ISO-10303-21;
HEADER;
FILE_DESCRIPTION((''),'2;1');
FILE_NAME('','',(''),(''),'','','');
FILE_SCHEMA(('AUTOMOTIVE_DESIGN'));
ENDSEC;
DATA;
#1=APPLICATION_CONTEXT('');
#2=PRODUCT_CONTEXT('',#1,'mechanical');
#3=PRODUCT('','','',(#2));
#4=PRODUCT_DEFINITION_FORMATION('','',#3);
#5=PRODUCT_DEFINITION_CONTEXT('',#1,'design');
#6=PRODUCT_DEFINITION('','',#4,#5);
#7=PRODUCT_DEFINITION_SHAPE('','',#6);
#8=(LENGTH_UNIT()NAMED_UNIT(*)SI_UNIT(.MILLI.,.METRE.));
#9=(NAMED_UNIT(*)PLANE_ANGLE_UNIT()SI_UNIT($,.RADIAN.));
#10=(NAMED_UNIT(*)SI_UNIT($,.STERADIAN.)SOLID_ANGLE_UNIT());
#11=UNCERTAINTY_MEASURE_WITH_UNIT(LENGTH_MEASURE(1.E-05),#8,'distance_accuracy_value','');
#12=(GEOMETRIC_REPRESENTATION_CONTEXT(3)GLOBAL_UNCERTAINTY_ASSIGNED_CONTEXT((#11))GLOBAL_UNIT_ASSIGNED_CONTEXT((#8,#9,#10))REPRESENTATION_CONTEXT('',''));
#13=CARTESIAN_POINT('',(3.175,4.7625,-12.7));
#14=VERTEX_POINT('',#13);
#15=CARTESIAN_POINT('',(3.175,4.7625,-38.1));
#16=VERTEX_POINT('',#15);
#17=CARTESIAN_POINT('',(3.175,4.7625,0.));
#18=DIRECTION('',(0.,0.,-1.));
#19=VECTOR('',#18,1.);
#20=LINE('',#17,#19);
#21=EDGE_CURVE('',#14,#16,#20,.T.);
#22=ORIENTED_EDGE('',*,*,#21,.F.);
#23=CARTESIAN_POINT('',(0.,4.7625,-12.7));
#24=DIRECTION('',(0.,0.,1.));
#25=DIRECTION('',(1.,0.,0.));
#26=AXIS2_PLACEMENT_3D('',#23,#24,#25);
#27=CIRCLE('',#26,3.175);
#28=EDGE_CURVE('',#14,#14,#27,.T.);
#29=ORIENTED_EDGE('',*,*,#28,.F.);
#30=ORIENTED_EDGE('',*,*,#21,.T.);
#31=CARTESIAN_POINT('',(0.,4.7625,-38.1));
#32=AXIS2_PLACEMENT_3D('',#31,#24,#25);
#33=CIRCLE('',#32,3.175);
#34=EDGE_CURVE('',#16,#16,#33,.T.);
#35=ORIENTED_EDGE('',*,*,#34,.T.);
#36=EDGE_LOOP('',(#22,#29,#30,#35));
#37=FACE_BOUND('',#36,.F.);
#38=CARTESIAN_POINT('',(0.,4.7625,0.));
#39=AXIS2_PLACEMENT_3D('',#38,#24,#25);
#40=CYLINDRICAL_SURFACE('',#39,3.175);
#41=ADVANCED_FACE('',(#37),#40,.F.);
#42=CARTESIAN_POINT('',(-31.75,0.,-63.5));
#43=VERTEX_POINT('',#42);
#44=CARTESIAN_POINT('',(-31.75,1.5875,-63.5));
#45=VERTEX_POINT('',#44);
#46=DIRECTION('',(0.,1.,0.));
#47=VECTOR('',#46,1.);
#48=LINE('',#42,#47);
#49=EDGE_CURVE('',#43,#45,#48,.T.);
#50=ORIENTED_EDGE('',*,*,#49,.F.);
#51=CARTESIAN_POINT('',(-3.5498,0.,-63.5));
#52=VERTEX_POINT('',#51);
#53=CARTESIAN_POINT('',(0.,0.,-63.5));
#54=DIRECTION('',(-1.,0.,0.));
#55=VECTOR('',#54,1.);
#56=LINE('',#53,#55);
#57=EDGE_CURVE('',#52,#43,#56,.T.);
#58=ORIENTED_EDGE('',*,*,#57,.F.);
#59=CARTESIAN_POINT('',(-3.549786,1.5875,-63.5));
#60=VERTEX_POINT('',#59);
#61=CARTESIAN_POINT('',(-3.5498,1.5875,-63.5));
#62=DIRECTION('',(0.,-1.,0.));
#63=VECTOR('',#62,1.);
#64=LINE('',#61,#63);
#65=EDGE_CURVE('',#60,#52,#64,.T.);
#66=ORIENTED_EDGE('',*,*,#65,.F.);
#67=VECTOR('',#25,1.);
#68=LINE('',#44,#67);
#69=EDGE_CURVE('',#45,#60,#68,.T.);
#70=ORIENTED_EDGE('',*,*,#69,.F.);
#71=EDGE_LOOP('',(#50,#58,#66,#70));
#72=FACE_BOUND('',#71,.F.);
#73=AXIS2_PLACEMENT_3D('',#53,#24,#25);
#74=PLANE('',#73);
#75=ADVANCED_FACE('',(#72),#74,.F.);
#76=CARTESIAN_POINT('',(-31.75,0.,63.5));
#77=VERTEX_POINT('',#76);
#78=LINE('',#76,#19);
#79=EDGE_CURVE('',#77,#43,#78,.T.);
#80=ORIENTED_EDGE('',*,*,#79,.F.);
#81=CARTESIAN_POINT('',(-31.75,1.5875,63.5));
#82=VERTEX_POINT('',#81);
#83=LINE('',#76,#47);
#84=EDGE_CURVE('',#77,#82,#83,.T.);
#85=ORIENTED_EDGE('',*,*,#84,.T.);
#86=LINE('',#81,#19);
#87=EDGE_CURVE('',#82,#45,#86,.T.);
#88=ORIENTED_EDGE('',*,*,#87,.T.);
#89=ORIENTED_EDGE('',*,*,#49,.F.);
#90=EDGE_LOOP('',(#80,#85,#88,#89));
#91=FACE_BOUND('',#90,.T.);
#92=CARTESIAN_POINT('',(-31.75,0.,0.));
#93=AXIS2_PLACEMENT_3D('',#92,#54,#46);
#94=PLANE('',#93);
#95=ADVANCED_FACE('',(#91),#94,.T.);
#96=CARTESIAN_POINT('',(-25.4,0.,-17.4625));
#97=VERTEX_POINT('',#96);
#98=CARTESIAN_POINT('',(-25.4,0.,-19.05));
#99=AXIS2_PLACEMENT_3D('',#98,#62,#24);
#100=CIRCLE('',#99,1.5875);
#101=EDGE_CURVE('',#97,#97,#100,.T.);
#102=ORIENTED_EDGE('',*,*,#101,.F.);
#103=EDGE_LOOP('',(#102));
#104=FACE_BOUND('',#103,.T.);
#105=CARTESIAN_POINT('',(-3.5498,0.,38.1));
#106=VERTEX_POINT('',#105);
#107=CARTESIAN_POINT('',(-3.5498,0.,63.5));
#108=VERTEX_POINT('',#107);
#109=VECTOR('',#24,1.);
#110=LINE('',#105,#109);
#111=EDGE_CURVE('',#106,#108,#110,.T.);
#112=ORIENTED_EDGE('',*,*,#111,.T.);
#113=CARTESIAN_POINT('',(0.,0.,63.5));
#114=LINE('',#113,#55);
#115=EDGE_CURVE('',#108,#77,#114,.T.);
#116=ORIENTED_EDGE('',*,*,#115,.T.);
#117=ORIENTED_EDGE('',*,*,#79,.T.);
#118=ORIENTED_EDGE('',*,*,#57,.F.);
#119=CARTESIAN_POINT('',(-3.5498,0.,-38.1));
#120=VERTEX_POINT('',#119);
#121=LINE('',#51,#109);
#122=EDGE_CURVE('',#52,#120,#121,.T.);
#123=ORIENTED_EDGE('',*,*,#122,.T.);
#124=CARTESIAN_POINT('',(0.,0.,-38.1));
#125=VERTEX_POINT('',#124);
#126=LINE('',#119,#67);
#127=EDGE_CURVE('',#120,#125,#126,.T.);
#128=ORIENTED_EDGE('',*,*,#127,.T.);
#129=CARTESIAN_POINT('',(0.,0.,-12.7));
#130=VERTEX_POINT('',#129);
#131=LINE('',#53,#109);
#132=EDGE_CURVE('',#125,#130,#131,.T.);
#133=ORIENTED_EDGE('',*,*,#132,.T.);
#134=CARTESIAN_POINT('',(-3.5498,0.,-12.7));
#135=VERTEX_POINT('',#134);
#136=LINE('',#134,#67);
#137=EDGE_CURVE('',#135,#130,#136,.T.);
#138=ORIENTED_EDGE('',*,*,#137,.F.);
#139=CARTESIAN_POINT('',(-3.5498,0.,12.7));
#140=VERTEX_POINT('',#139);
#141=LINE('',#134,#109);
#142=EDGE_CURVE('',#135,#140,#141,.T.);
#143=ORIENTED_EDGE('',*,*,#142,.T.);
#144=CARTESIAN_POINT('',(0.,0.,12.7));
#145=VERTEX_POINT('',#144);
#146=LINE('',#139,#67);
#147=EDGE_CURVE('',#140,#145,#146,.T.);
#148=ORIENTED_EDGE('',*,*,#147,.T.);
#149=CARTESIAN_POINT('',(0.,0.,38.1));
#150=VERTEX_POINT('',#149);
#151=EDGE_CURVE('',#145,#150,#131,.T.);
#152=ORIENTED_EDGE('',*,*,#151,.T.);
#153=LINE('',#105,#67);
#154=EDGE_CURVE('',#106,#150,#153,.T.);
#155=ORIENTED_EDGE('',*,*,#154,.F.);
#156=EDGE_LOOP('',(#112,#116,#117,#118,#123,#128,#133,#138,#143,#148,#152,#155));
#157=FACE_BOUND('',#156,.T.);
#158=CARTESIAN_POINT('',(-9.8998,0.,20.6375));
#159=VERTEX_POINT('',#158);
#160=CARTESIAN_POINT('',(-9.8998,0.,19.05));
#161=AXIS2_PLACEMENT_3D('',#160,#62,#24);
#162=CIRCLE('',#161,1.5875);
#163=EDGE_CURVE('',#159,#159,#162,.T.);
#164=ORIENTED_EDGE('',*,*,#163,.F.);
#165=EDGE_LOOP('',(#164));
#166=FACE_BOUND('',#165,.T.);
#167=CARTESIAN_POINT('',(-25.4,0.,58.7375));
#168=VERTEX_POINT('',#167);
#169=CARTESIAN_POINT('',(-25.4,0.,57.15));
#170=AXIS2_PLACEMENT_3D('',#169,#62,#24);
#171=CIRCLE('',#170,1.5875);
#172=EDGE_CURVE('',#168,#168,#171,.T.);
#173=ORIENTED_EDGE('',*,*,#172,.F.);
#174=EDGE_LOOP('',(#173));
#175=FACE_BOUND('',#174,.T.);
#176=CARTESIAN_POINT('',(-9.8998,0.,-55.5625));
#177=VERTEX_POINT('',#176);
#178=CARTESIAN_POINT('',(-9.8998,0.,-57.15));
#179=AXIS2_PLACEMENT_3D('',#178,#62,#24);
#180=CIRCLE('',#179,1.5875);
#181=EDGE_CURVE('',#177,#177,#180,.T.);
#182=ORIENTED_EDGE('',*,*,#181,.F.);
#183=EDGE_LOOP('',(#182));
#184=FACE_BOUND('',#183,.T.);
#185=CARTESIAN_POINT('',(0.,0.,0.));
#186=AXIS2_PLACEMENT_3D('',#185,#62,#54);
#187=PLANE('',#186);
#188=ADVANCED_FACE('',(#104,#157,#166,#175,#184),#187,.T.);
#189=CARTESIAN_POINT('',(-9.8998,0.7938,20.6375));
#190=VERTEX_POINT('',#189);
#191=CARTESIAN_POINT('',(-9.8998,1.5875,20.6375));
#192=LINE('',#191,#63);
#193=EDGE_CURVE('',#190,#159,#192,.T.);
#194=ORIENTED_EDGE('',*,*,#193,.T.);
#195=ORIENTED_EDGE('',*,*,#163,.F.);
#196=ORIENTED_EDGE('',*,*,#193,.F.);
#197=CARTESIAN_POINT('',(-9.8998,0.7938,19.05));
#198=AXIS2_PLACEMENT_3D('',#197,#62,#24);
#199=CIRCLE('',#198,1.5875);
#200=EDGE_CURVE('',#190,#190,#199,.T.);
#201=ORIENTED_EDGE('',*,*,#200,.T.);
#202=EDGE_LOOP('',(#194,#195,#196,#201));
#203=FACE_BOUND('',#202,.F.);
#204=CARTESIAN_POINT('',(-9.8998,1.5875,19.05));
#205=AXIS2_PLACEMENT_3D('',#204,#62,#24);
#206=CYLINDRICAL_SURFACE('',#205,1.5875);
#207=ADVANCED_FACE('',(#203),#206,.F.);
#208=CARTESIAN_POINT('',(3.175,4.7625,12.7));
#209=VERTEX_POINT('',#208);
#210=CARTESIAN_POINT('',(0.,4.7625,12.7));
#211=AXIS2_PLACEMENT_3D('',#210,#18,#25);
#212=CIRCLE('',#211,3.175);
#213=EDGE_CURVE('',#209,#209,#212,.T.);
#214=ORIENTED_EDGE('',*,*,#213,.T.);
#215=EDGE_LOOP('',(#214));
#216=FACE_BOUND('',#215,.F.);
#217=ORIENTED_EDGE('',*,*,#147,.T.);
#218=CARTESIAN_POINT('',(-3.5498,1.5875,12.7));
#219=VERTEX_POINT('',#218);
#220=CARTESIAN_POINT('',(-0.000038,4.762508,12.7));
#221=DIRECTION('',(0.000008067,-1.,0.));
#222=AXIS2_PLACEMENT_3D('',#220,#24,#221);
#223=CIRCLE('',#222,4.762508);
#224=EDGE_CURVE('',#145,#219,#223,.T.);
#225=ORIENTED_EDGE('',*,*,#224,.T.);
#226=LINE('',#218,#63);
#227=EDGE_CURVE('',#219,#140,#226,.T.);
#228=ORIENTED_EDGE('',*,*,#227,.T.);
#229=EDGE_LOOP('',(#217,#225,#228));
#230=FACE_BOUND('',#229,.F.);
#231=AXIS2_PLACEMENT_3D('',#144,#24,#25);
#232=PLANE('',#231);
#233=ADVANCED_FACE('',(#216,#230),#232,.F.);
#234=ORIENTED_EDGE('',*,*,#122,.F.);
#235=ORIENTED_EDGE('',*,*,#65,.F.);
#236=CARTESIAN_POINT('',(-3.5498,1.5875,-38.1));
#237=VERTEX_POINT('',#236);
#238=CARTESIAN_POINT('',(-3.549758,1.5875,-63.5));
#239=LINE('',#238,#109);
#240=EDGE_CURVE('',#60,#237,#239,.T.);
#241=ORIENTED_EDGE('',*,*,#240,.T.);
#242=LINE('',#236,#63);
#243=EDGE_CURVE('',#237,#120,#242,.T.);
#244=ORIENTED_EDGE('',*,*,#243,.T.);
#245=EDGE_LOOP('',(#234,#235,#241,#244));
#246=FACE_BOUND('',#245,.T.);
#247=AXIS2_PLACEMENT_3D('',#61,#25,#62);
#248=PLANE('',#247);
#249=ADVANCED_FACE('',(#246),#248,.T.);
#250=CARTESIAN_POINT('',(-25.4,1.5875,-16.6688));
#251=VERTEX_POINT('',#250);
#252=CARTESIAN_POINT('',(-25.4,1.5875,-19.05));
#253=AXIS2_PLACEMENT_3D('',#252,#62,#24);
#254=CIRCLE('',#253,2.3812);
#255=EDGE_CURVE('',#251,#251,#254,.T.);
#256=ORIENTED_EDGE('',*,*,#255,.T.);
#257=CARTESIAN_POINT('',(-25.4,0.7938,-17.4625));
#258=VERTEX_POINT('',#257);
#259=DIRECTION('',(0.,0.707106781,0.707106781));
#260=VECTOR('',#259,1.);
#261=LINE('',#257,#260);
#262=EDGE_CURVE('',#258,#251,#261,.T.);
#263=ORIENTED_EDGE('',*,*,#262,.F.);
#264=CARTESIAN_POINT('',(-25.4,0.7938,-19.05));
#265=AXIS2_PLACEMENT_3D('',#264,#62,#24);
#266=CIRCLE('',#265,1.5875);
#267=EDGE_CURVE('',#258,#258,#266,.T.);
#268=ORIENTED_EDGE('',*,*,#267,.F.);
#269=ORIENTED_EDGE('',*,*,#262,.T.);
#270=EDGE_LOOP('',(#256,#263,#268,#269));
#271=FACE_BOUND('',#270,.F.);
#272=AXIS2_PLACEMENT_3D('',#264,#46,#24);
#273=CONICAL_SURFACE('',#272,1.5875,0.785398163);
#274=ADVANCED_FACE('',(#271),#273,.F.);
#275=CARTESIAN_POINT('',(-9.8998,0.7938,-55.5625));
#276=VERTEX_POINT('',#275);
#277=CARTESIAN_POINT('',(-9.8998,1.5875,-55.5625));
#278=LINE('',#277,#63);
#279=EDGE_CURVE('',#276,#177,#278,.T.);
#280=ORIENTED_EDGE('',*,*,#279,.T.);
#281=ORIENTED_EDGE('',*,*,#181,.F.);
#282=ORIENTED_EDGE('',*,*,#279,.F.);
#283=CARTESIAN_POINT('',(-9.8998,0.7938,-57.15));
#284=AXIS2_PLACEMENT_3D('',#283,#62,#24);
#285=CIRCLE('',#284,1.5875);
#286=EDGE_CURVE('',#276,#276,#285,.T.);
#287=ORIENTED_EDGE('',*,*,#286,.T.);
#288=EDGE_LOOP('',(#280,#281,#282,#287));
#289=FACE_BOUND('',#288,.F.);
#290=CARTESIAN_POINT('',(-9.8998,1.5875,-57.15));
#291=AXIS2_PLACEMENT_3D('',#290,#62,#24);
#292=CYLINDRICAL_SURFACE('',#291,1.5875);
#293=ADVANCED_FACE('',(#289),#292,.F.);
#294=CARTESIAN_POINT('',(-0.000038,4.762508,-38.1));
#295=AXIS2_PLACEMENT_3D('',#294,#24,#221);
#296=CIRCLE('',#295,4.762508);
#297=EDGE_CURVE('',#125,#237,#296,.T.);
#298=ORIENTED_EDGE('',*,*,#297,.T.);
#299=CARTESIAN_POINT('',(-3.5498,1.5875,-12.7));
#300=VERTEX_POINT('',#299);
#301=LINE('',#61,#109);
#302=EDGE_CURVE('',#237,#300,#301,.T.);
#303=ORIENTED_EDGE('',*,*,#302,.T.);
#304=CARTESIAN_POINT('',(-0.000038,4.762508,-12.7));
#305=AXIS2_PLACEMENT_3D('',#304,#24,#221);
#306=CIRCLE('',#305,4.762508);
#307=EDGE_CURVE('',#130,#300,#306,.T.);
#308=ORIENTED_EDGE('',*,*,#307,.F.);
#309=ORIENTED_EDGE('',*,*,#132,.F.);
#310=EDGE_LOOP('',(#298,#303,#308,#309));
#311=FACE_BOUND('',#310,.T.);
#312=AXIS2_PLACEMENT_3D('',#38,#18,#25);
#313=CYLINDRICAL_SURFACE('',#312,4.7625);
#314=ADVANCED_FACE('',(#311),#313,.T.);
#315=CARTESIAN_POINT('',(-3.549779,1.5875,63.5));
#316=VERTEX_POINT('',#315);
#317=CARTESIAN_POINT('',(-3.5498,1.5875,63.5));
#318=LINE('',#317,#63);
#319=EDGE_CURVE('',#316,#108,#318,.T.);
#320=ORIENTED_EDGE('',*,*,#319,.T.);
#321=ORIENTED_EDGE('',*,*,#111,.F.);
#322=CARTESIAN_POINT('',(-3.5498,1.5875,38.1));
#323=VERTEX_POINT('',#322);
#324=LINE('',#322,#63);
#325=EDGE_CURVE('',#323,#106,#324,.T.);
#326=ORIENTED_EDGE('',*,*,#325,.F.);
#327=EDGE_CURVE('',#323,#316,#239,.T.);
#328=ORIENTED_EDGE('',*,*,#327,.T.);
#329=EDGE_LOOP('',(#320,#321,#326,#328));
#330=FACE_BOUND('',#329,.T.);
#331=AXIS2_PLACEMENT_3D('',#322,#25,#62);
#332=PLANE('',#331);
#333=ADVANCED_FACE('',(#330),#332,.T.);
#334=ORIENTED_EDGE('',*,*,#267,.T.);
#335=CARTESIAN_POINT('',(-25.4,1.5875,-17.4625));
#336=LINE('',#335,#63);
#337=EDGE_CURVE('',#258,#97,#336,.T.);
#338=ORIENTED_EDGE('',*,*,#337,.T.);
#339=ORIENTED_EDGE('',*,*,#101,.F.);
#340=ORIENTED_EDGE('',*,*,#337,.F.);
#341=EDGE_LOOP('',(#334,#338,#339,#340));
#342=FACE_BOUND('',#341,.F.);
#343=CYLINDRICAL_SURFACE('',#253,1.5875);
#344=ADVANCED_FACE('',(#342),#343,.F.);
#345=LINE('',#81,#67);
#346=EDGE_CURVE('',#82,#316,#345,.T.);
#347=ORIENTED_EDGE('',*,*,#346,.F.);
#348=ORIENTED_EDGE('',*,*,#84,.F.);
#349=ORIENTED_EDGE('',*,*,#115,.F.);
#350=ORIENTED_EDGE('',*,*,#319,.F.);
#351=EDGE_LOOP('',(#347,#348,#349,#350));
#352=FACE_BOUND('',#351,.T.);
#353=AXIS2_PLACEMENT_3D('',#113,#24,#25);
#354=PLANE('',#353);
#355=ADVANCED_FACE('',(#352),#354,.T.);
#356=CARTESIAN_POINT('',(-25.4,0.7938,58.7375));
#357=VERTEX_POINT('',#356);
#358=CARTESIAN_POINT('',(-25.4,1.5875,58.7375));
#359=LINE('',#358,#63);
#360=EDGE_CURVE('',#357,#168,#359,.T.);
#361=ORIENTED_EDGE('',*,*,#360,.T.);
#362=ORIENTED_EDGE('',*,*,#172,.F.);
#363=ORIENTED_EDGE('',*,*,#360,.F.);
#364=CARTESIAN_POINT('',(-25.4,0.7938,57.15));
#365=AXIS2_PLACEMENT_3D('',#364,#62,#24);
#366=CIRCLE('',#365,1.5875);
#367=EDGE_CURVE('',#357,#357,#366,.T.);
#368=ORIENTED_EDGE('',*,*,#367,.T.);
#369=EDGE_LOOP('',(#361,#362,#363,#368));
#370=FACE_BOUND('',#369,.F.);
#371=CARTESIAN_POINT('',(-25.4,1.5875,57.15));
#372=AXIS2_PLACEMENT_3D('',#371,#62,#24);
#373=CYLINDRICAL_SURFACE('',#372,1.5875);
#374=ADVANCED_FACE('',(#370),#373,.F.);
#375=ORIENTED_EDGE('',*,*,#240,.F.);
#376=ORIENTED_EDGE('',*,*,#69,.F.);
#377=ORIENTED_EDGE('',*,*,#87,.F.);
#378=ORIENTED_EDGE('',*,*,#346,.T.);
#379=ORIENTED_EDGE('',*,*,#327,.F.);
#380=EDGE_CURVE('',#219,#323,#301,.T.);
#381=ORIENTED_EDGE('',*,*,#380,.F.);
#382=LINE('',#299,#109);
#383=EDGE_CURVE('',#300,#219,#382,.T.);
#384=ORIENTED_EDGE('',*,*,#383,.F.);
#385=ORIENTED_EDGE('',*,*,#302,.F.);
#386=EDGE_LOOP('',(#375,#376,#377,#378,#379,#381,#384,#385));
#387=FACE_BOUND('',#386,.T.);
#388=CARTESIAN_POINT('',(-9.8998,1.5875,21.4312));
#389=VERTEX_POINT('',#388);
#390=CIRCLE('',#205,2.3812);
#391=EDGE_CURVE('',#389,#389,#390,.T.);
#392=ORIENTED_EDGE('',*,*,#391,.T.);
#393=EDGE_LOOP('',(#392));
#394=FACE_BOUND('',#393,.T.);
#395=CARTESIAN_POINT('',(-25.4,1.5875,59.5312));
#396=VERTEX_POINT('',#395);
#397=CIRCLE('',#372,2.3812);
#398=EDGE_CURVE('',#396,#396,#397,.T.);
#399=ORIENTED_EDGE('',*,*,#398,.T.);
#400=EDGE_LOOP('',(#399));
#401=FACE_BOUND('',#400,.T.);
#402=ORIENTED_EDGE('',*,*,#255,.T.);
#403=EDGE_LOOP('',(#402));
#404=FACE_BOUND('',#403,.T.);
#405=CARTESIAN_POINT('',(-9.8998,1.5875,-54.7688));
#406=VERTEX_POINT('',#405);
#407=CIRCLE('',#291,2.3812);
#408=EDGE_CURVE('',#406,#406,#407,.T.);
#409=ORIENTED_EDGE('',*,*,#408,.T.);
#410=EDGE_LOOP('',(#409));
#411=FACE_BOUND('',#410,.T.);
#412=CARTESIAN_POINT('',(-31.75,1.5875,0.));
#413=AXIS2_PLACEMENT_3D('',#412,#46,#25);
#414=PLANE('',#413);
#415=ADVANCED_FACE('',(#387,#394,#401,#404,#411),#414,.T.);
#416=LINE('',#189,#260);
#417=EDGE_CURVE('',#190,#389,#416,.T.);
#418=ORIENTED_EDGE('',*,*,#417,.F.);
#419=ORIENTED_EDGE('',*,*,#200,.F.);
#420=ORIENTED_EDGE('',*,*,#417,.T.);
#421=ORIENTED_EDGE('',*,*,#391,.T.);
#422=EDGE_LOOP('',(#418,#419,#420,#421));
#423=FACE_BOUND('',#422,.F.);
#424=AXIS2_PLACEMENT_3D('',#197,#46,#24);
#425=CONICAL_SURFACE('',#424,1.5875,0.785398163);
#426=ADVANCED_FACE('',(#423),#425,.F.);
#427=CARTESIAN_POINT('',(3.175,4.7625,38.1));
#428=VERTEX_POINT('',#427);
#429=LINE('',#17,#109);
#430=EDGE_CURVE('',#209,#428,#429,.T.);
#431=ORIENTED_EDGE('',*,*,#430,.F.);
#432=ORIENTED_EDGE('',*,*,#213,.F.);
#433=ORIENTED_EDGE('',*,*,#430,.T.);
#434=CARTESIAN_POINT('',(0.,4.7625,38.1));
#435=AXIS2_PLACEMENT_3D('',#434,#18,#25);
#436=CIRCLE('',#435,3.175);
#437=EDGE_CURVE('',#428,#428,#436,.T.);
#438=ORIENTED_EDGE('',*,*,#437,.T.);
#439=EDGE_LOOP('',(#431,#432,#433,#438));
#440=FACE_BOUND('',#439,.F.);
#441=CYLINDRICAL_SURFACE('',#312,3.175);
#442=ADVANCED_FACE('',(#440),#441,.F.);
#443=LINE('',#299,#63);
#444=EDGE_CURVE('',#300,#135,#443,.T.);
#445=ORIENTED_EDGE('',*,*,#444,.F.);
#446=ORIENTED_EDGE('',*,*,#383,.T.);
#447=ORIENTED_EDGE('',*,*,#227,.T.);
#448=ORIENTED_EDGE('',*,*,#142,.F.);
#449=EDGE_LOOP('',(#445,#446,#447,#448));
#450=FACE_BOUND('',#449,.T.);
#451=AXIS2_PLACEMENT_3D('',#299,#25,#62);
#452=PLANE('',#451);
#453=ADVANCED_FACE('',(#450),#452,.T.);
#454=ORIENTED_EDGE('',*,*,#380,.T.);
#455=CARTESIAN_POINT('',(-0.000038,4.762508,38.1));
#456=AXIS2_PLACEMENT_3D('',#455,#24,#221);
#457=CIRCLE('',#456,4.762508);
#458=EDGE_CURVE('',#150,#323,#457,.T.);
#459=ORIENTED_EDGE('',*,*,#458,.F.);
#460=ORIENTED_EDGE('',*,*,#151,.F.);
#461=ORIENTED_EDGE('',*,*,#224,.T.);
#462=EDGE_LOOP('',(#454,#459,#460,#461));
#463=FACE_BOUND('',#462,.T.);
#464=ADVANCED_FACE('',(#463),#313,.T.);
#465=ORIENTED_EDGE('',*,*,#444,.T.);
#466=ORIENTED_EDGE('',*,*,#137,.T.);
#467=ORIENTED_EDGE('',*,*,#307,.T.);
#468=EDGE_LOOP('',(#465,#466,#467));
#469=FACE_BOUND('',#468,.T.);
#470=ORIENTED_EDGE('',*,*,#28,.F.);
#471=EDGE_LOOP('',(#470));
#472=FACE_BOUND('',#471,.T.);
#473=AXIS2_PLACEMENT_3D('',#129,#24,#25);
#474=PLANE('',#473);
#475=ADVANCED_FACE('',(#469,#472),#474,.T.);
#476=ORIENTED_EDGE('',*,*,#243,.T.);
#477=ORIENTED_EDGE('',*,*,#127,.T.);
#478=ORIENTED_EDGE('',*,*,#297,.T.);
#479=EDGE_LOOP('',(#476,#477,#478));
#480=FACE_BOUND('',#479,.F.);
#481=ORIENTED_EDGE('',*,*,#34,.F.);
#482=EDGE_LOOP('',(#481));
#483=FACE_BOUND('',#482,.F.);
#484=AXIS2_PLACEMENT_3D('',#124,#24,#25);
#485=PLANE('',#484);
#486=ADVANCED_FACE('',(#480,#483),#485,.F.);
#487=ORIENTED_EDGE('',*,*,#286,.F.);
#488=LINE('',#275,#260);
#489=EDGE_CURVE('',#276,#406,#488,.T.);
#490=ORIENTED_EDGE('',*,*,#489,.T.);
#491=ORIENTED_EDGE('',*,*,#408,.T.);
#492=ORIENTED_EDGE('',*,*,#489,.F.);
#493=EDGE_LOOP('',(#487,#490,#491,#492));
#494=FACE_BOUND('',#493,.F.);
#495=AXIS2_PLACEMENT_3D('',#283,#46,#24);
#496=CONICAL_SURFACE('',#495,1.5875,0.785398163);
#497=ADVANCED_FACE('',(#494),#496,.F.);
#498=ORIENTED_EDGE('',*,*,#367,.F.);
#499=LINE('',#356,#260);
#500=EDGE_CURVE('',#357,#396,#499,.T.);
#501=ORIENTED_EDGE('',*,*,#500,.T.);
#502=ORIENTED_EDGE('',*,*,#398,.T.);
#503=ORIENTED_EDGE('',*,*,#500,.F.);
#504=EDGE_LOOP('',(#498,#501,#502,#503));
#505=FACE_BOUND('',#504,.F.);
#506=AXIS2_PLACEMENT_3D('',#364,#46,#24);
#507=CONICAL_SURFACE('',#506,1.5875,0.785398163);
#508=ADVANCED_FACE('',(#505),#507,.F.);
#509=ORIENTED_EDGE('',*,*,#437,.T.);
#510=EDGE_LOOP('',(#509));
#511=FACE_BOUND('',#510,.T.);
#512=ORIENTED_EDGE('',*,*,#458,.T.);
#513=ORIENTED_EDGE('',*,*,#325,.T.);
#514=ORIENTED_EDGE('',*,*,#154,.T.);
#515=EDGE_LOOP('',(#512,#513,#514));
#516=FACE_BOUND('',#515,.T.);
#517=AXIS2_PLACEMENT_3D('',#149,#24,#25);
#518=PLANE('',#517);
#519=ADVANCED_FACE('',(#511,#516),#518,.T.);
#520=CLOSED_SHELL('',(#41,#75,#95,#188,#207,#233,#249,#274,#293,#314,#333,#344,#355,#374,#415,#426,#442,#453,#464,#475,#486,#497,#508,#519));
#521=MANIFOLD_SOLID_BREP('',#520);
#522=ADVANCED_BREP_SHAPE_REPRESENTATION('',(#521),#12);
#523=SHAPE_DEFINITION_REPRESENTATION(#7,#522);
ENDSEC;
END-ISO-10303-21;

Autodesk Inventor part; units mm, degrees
ref_plane "YZ Plane" through (0, 0, 0) normal (1, 0, 0) x (0, 1, 0)
ref_plane "XZ Plane" through (0, 0, 0) normal (0, 1, 0) x (-1, 0, 0)
sketch "Sketch1" plane through (0, 0, 0) normal (0, 0, 1) x (1, 0, 0)
  line L0 (0, 0) -> (-31.75, 0)
  line L1 (-31.75, 0) -> (-31.75, 1.5875)
  line L2 (-31.75, 1.5875) -> (0, 1.5875)
  line L3 (0, 1.5875) -> (0, 0)
  circle A0 centre (0, 4.7625) radius 4.7625
  circle A1 centre (0, 4.7625) radius 3.175
  dimension "d0" = 31.75
  dimension "d1" = 1.5875
  dimension "d2" = 9.525
  dimension "d3" = 6.35
extrude "Extrusion1" add sketch "Sketch1" along normal mid plane 127
ref_plane "Work Plane1" through (0, 0, 38.1) normal (0, 0, 1) x (1, 0, 0)
sketch "Sketch2" plane through (0, 0, 38.1) normal (0, 0, 1) x (1, 0, 0)
  arc A0 (0, 0) -> (-3.5498, 1.5875) centre (0, 4.7625) ccw projected
  line L0 (-3.5498, 1.5875) -> (-3.5498, 0)
  line L1 (-3.5498, 0) -> (0, 0)
extrude "Extrusion2" cut sketch "Sketch2" along normal blind 25.4
pattern_linear "Rectangular Pattern1" count 3 spacing 50.8 along (0, 0, -1) of "Extrusion2"
sketch "Sketch3" plane through (-31.75, 1.5875, -63.5) normal (0, 1, 0) x (1, 0, 0)
  line L0 (28.2002, 0) -> (0, 0) construction
  line L1 (0, -127) -> (28.2002, -127) construction
  line L2 (0, 0) -> (28.2002, 0) construction
  line L3 (28.2002, 0) -> (28.2002, -127) construction
  line L4 (28.2002, -127) -> (0, -127) construction
  line L5 (0, -127) -> (0, 0) construction
  line L6 (21.8502, -120.65) -> (21.8502, -6.35) construction
  line L7 (21.8502, -6.35) -> (6.35, -6.35) construction
  line L8 (6.35, -6.35) -> (6.35, -120.65) construction
  line L9 (6.35, -120.65) -> (21.8502, -120.65) construction
  line L10 (6.35, -82.55) -> (21.8502, -82.55) construction
  line L11 (6.35, -44.45) -> (21.8502, -44.45) construction
  line L12 (6.35, -6.35) -> (21.8502, -6.35) construction
  point P0 (31.75, -63.5)
  dimension "d12" = 6.35
  dimension "d15" = 114.3
hole "Hole1" at (-9.8998, 1.5875, -57.15) at (-25.4, 1.5875, 57.15) at (-9.8998, 1.5875, 19.05) at (-25.4, 1.5875, -19.05) direction (0, -1, 0) diameter 3.175 end through all
chamfer "Chamfer1" distance 0.7937 angle 45 4 edges at (-25.4, 1.5875, 55.5625) (-9.8998, 1.5875, 17.4625) (-25.4, 1.5875, -20.6375) (-9.8998, 1.5875, -58.7375)
